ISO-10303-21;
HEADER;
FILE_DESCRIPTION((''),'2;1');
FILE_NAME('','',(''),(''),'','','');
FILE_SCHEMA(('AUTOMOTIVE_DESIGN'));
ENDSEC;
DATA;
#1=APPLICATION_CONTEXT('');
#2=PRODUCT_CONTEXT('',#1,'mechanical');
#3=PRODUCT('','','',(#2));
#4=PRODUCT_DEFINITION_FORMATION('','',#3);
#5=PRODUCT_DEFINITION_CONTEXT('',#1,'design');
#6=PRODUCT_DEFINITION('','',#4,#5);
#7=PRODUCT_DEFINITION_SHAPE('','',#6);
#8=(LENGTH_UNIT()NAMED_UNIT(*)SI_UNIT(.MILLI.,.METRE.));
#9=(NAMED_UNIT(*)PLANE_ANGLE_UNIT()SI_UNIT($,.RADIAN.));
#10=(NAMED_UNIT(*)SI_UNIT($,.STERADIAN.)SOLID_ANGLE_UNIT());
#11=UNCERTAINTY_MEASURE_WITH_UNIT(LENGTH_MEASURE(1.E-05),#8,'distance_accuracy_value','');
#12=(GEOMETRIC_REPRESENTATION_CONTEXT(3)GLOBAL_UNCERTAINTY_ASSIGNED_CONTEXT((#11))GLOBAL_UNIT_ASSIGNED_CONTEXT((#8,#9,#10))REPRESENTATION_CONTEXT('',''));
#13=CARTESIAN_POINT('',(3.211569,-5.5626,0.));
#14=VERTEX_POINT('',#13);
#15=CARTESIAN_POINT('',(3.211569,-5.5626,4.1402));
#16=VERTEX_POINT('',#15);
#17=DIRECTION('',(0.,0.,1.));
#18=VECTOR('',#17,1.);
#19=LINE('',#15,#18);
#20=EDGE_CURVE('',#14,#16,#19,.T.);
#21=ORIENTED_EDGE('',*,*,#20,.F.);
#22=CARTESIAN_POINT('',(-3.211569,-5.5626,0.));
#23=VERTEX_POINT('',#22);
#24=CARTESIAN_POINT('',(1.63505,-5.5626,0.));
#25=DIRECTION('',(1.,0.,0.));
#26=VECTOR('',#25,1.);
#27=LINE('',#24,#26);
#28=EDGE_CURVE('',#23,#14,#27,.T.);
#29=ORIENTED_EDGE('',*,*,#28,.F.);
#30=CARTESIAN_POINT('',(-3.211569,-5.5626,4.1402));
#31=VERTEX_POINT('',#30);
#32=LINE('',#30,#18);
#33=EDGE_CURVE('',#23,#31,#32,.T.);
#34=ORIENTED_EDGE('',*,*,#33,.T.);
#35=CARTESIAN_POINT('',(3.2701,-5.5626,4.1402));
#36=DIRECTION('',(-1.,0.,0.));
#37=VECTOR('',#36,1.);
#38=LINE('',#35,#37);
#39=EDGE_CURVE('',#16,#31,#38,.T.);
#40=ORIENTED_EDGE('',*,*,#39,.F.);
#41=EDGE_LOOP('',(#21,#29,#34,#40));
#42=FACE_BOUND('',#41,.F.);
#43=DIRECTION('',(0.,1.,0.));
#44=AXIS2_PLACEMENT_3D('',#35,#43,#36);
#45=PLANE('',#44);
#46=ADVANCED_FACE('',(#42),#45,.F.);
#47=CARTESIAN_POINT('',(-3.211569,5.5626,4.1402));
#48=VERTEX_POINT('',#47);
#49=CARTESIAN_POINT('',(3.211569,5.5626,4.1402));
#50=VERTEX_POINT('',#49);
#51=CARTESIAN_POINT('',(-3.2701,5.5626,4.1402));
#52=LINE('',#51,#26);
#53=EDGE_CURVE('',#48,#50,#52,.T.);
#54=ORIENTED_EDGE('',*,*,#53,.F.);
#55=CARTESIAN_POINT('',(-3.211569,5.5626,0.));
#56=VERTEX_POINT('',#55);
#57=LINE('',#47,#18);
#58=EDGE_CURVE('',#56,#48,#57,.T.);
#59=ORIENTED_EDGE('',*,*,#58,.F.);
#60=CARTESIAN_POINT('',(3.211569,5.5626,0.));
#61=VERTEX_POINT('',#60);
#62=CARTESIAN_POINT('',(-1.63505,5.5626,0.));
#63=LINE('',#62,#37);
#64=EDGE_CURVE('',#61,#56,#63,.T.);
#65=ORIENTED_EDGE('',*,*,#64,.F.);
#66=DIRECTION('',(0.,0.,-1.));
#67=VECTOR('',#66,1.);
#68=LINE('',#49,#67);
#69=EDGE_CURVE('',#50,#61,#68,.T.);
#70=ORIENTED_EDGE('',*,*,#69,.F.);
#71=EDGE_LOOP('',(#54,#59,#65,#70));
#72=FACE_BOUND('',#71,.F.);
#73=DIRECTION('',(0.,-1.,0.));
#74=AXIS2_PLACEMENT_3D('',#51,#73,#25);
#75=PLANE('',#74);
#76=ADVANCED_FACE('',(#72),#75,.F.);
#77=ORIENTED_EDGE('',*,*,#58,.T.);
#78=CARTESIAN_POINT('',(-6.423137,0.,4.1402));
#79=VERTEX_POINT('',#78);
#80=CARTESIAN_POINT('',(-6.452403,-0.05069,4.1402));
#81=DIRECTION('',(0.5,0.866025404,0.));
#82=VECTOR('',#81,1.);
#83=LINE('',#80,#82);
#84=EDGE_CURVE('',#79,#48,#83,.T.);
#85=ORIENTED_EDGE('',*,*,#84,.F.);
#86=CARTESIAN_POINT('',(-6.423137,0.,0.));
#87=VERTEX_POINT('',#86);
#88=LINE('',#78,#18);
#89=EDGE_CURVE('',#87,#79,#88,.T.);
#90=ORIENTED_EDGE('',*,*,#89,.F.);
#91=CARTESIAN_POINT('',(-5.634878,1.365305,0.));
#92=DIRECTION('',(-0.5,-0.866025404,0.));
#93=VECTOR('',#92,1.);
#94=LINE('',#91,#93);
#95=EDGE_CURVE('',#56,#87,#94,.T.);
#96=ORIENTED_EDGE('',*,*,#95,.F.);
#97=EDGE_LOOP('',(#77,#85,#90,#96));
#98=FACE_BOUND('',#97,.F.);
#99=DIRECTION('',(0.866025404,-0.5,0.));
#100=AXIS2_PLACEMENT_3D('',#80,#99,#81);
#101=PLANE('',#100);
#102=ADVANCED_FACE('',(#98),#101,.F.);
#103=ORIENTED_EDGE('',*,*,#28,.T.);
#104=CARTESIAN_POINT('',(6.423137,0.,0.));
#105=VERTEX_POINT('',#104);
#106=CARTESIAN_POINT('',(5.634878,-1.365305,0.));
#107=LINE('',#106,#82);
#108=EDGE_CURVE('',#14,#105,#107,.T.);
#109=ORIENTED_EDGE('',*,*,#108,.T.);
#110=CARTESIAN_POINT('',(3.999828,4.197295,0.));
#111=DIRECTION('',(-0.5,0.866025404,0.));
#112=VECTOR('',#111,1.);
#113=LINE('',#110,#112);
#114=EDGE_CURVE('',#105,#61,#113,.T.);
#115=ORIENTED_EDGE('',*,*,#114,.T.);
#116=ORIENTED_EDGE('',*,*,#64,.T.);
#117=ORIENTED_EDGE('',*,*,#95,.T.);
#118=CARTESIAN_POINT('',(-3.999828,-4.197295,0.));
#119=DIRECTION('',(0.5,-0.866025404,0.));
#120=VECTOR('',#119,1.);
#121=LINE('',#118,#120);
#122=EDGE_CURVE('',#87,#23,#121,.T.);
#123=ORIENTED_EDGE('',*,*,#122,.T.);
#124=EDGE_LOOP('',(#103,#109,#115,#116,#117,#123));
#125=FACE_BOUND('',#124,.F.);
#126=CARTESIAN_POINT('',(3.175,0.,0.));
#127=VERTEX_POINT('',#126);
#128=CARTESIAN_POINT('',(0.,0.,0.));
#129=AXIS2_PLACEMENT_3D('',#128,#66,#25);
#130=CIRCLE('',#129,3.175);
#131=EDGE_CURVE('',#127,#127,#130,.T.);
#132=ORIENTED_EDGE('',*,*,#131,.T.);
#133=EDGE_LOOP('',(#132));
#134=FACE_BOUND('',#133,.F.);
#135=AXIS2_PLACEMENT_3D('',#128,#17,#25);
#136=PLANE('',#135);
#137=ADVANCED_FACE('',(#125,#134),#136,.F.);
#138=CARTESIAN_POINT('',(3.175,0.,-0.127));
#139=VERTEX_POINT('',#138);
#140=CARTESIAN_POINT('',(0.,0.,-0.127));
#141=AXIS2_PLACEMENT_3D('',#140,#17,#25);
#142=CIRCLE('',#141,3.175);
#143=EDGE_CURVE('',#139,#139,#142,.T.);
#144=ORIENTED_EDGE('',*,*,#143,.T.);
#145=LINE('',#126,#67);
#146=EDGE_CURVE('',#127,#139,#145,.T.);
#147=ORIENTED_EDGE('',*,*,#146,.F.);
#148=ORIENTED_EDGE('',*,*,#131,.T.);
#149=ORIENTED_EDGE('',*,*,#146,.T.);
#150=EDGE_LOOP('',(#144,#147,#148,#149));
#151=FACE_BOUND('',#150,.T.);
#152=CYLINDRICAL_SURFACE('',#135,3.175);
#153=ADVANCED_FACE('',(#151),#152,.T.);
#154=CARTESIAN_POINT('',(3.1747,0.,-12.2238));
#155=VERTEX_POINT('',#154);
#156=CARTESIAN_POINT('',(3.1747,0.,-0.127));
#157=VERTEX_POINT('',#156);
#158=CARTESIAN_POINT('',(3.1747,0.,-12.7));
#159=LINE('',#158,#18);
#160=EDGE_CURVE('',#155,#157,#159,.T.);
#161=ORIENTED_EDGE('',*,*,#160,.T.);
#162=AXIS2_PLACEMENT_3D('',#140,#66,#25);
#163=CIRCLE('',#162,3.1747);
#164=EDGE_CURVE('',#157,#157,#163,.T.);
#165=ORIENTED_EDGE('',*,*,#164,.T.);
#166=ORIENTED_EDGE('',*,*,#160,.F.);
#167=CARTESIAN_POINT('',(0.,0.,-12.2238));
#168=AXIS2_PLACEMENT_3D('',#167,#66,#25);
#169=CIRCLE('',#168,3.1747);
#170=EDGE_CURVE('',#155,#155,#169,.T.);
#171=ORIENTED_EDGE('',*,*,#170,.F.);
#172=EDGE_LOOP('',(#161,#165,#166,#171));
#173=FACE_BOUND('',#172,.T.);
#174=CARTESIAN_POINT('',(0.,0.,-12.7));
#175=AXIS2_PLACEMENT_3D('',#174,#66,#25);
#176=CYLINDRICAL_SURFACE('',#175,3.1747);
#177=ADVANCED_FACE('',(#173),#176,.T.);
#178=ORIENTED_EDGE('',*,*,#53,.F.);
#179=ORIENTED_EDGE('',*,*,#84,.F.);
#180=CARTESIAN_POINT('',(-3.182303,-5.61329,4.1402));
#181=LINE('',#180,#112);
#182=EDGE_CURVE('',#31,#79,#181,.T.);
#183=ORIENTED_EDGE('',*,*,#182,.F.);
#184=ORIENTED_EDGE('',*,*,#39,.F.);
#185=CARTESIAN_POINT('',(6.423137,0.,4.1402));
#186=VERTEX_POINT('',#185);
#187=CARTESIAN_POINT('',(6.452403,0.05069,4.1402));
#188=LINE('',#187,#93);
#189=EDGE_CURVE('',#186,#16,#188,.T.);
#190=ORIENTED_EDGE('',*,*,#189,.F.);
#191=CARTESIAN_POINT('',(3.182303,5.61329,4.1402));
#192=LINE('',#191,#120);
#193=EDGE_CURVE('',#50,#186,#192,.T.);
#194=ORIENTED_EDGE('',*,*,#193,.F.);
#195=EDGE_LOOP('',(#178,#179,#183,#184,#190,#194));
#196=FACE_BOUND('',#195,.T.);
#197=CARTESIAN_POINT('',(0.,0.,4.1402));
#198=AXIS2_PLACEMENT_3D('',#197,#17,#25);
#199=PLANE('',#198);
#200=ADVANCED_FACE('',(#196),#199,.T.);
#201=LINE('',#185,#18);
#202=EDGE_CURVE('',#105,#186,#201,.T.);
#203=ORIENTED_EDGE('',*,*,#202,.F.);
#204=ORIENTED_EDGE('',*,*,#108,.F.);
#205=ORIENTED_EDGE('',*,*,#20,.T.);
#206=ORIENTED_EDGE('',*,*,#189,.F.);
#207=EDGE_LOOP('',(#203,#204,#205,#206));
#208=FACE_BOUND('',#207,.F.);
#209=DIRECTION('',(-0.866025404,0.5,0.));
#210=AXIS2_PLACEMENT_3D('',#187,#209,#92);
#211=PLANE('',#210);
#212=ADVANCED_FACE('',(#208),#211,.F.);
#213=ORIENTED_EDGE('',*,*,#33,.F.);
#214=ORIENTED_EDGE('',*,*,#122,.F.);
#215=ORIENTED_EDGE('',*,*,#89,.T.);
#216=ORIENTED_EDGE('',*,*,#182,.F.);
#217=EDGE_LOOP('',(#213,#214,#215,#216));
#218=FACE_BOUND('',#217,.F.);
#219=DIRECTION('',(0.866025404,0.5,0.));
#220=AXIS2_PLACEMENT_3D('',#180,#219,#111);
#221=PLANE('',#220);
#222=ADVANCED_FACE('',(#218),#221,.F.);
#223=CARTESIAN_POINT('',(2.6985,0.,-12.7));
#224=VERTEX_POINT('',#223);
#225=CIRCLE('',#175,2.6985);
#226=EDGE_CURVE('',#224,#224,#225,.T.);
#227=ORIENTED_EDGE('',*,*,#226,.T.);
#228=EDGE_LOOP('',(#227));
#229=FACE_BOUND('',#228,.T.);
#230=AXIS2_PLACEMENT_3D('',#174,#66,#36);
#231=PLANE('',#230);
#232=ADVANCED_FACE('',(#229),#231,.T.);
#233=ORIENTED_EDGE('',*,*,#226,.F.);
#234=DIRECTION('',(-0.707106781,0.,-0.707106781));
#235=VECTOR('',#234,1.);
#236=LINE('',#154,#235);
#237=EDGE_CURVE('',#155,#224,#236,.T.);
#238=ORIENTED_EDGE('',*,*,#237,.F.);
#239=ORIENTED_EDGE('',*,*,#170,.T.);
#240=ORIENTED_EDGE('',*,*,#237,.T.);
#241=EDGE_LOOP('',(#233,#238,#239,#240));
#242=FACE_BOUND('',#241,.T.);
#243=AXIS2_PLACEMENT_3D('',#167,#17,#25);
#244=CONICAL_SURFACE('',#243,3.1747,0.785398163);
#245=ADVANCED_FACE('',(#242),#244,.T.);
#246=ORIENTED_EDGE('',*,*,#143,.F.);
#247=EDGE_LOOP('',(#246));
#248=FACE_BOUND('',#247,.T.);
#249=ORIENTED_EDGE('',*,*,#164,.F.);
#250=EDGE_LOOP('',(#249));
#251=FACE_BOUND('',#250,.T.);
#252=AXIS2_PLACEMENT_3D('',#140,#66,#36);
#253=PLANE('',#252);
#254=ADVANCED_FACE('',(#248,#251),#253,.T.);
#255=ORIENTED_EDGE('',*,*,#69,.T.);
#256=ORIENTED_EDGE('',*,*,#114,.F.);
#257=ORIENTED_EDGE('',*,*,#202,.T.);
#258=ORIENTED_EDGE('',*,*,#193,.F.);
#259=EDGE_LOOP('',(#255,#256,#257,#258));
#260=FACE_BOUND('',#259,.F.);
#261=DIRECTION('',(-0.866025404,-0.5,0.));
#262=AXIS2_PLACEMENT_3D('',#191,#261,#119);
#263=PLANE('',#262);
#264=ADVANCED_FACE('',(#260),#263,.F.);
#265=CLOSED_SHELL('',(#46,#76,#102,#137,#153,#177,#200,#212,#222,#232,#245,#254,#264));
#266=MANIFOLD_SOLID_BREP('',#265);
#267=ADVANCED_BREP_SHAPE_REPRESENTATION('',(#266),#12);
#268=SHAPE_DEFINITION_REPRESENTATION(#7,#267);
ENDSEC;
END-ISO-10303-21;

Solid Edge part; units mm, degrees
sketch "Sketch1" plane through (0, 0, 0) normal (0, 0, 1) x (1, 0, 0)
  circle A0 centre (0, 0) radius 6.4526
  dimension "D1" = 12.9052
extrude "Protrusion1" add sketch "Sketch1" along normal blind 4.1402
sketch "Sketch2" plane through (0, 0, 0) normal (0, 0, -1) x (1, 0, 0)
  circle A0 centre (0, 0) radius 3.175
extrude "Protrusion2" add sketch "Sketch2" along normal blind 12.7
sketch "Sketch3" plane through (0, 0, -12.7) normal (0, 0, -1) x (1, 0, 0)
  circle A0 centre (0, 0) radius 3.1747
extrude "Cutout1" cut sketch "Sketch3" against normal blind 12.573 flip side to cut
chamfer "Chamfer_1" distance 0.4762 angle 45 1 edges at (-3.1747, 0, -12.7)
sketch "Sketch4" plane through (0, 0, 4.1402) normal (0, 0, 1) x (1, 0, 0)
  line L0 (-3.2701, 5.5626) -> (3.2701, 5.5626)
  dimension "D1" = 11.1252
extrude "Cutout2" cut sketch "Sketch4" against normal up to next material side at (0, 5.6126, 4.1402)
pattern_circular "Pattern1" count 6 over 360 about axis through (0, 0, 4.1402) along (0, 0, 1) of "Cutout2"
properties part number "117820"
